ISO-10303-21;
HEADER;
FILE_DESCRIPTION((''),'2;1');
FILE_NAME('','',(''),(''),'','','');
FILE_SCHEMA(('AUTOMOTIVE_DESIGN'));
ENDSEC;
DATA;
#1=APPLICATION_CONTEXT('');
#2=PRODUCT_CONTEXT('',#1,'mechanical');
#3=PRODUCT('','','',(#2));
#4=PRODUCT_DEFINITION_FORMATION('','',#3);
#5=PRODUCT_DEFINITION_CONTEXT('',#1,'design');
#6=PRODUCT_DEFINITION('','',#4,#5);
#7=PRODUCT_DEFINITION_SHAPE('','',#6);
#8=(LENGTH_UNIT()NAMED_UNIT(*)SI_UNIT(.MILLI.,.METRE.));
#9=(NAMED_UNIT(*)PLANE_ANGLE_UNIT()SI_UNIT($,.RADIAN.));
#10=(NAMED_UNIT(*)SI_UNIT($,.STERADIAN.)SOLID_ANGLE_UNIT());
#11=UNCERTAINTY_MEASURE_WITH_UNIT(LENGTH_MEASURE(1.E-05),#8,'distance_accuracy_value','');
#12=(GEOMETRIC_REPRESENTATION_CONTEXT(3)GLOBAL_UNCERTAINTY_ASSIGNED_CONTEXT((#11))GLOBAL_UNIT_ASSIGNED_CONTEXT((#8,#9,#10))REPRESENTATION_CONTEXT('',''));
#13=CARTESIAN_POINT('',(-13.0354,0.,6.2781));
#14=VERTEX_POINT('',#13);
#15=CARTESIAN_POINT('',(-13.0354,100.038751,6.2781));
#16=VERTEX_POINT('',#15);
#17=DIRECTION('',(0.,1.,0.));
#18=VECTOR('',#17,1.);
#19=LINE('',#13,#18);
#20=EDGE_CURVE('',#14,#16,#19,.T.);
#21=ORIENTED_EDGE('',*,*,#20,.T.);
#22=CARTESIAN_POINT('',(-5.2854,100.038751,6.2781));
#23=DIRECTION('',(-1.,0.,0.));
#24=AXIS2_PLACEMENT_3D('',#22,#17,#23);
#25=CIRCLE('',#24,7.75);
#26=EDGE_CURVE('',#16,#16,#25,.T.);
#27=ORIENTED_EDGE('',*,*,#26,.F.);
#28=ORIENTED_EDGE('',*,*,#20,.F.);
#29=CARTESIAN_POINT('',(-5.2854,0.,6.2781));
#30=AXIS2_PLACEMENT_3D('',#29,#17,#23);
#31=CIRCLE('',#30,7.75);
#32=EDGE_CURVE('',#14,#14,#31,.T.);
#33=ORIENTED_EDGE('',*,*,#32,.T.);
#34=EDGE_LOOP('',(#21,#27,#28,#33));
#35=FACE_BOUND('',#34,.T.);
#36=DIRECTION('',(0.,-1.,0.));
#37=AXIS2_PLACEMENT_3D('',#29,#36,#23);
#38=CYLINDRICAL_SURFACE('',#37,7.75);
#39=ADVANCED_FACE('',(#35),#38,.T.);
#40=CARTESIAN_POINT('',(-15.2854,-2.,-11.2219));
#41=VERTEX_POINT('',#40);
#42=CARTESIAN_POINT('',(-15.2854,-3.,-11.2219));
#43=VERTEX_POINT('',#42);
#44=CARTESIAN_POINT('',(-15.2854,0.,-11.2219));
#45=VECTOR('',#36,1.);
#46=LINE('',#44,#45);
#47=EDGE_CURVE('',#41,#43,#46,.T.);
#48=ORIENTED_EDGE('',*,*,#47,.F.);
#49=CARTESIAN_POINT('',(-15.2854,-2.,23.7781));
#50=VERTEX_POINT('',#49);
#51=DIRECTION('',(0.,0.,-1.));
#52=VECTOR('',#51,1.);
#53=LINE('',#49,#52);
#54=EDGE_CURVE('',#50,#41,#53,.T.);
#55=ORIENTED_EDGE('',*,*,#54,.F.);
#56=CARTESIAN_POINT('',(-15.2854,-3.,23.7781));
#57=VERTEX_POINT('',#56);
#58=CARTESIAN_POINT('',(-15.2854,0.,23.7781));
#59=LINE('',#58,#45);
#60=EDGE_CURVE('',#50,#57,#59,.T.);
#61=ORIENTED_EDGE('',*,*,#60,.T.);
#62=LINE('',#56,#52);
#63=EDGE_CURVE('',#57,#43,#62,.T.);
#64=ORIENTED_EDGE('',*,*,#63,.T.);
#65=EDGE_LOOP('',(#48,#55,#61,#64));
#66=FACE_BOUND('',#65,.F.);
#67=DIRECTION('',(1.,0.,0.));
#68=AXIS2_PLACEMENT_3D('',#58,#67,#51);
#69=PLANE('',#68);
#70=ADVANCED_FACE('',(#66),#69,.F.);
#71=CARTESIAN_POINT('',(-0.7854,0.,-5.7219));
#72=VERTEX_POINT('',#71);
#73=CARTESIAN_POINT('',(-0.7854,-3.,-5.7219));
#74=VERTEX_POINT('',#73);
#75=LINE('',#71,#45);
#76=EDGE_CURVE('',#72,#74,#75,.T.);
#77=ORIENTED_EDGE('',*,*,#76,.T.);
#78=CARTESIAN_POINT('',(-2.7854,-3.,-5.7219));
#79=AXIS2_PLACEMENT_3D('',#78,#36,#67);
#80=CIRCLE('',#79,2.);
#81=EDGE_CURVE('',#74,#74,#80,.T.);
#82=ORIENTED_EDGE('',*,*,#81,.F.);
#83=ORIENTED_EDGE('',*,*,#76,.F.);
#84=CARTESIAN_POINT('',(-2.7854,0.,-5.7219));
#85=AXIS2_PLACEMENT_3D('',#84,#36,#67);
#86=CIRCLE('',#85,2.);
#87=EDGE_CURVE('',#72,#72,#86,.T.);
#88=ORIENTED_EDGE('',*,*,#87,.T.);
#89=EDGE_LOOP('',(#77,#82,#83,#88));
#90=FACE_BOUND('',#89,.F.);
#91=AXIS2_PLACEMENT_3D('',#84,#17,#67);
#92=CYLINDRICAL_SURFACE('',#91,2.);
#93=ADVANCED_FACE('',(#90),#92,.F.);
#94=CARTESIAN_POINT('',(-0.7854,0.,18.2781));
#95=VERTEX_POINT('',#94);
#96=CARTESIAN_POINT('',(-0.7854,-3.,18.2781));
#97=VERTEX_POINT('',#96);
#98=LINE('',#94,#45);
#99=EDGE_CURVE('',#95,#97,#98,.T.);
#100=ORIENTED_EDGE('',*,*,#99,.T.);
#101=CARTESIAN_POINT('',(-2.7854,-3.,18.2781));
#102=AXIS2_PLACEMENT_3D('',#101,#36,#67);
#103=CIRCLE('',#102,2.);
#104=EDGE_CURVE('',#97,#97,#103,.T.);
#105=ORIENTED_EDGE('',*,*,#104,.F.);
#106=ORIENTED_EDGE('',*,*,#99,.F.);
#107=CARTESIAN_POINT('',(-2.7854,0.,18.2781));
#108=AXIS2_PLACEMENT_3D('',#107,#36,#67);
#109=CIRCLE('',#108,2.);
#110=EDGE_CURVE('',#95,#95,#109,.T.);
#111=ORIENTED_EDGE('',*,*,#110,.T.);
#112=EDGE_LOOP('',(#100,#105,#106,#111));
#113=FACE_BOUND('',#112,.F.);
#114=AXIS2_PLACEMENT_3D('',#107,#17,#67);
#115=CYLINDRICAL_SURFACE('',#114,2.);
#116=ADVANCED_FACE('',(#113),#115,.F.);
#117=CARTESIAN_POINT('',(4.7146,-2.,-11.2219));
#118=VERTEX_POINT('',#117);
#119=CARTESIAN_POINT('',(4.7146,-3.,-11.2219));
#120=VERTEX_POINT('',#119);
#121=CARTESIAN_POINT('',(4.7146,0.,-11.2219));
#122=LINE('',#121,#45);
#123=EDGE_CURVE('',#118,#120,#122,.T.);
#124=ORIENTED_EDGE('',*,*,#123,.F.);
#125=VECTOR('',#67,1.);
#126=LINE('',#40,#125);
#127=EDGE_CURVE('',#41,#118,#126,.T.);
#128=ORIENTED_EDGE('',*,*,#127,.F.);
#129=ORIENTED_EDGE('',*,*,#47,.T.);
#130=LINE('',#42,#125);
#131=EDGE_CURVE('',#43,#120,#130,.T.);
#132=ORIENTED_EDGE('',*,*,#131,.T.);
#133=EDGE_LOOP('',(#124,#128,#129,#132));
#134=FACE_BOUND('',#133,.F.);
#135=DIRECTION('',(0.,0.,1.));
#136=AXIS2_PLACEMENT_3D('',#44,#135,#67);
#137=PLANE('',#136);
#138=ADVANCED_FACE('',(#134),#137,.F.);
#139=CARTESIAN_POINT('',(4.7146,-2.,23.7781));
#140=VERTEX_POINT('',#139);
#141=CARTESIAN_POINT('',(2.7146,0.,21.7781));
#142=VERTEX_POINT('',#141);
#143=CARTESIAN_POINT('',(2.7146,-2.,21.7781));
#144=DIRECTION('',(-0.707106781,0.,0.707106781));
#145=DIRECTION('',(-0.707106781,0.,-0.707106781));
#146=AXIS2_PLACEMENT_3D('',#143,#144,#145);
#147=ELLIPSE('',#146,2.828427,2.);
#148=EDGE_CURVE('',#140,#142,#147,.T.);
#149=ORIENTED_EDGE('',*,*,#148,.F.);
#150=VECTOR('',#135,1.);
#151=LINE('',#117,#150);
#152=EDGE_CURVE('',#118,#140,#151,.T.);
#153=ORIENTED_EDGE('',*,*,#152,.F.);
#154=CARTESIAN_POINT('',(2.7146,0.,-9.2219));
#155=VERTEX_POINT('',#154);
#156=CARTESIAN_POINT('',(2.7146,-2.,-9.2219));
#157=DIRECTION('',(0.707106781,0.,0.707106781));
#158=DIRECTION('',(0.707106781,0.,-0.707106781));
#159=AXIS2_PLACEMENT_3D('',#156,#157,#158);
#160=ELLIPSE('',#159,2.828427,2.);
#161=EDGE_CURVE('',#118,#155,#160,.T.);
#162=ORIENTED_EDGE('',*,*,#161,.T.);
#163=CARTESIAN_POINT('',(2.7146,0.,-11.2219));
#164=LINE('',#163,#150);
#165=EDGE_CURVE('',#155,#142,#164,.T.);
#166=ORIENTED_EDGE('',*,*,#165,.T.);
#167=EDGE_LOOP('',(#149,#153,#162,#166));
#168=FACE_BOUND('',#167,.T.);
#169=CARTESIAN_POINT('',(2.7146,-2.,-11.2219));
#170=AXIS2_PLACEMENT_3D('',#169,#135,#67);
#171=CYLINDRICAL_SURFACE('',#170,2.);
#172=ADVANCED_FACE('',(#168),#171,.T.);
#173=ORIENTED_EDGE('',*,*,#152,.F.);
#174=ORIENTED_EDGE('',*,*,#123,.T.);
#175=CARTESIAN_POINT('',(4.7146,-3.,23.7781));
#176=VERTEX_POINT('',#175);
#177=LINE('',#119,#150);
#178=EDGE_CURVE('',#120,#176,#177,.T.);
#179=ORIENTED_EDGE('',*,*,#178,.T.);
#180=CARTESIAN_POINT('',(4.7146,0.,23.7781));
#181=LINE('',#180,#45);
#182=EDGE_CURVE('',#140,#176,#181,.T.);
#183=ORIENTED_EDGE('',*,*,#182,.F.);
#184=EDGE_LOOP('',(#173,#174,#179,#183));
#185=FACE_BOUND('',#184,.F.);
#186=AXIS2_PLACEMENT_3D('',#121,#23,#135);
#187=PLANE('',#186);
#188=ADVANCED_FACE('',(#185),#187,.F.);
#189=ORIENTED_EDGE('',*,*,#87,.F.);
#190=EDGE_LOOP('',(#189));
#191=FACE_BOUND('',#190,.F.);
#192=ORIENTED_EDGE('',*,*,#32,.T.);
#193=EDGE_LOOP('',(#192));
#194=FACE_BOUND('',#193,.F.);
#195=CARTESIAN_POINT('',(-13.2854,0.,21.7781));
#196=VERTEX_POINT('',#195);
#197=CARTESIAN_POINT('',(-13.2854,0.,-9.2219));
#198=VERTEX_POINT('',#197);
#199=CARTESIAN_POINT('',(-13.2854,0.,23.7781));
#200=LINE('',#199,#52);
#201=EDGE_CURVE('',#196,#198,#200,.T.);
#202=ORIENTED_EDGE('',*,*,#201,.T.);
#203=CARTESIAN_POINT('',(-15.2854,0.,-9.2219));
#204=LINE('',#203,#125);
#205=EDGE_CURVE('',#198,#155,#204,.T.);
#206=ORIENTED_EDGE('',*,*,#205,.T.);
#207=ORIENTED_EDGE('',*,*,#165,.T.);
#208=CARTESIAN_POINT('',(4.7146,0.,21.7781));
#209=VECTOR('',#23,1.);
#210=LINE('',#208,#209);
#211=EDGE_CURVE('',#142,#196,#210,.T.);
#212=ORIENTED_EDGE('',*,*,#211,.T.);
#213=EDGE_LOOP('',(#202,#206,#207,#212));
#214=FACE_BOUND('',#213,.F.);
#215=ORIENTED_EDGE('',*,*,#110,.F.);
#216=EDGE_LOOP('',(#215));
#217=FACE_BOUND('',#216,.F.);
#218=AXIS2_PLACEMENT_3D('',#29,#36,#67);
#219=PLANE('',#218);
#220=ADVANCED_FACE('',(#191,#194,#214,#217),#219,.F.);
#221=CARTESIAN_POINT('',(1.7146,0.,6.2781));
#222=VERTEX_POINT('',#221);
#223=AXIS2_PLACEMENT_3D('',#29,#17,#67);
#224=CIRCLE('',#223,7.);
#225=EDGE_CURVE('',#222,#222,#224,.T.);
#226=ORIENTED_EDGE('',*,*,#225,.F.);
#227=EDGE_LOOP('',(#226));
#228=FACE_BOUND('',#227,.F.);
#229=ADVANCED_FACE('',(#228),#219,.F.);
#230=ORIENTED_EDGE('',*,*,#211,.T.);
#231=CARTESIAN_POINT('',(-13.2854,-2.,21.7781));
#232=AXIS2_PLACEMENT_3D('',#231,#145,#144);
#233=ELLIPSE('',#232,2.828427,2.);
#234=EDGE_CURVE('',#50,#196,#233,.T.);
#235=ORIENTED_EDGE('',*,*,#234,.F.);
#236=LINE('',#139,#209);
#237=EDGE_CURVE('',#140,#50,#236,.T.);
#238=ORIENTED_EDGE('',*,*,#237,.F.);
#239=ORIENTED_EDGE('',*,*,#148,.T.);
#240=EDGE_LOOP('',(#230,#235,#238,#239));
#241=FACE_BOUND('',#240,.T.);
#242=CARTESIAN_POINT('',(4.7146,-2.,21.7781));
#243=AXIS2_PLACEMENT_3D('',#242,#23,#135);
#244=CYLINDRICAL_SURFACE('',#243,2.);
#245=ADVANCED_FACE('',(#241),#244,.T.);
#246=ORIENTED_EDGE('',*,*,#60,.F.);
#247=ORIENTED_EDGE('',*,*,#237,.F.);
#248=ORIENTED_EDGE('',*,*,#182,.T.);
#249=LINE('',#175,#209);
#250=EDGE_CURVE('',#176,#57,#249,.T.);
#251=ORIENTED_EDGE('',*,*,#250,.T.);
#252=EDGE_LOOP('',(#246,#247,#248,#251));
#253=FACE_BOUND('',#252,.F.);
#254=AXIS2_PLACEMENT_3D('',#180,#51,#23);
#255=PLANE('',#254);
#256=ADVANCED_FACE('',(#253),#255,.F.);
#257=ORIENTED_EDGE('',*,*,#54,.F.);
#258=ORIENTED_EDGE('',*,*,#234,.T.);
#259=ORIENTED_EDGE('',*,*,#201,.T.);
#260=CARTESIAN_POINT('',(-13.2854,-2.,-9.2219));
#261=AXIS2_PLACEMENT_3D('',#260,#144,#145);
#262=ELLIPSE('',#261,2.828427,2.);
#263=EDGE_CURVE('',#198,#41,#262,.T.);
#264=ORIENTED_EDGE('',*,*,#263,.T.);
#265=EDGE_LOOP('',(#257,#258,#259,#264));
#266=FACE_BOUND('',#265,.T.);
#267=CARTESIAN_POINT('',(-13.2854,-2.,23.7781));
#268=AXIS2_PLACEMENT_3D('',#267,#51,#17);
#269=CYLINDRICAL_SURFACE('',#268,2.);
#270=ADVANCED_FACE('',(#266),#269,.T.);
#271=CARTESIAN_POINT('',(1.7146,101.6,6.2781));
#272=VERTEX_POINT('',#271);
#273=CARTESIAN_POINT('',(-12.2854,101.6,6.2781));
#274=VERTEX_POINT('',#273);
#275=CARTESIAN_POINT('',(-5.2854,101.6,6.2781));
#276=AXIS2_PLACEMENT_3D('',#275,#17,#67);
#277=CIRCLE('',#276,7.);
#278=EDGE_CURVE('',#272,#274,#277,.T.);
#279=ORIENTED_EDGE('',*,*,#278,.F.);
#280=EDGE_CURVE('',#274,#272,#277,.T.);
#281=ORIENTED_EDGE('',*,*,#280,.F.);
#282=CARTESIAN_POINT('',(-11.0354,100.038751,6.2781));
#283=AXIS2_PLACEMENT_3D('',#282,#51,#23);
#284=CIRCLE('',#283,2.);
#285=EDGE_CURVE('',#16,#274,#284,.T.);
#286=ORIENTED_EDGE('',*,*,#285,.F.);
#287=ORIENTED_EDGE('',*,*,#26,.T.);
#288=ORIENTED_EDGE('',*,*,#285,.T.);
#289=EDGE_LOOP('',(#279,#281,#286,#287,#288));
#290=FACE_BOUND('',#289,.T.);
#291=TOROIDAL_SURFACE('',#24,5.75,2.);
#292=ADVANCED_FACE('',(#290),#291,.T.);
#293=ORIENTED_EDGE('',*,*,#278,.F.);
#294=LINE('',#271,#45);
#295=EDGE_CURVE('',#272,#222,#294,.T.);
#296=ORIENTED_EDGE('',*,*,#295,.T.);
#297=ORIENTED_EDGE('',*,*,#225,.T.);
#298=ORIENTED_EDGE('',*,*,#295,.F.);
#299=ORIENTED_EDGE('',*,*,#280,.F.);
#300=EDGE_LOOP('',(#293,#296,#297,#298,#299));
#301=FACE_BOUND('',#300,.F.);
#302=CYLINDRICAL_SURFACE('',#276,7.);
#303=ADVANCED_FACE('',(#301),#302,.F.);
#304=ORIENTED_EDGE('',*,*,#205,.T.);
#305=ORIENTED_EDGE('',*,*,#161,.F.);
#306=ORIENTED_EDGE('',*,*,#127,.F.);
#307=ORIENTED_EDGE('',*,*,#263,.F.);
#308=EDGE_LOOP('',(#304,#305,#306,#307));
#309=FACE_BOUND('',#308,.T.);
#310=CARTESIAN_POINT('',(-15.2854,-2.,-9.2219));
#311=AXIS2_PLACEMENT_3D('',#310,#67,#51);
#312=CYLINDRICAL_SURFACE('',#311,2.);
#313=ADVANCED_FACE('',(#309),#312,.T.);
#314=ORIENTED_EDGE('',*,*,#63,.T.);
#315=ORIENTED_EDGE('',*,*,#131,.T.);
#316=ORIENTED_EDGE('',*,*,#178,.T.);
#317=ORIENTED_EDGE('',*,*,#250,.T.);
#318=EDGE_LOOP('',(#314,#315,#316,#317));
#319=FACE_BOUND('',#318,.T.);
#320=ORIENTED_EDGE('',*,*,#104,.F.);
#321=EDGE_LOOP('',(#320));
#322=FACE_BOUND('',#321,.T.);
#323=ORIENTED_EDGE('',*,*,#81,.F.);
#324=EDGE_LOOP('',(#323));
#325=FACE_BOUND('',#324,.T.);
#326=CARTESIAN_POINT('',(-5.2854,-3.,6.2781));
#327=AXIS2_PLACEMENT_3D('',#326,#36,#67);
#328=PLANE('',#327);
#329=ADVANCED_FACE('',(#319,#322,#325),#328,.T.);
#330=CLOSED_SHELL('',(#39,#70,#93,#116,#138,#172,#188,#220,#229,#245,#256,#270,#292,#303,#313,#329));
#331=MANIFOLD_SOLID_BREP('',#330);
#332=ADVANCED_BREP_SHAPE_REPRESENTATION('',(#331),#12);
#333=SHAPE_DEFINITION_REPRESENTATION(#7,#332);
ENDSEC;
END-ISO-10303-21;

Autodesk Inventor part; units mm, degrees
ref_plane "YZ Plane" through (0, 0, 0) normal (1, 0, 0) x (0, 1, 0)
ref_plane "XZ Plane" through (0, 0, 0) normal (0, 1, 0) x (-1, 0, 0)
ref_plane "XY Plane" through (0, 0, 0) normal (0, 0, 1) x (1, 0, 0)
sketch "Sketch1" plane through (0, 0, 0) normal (0, 1, 0) x (-1, 0, 0)
  circle A0 centre (5.2854, 6.2781) radius 7.75
  point P0 (0, 0)
  dimension "d0" = 15.5
extrude "Extrusion1" add sketch "Sketch1" along normal blind 101.6
sketch "Sketch2" plane through (-5.2854, 101.6, 6.2781) normal (0, 1, 0) x (1, 0, 0)
  circle A0 centre (0, 0) radius 7.75 construction
  circle A1 centre (0, 0) radius 7
  point P0 (5.2854, 6.2781)
  dimension "d3" = 14
  dimension "d4" = 0
extrude "Extrusion2" cut sketch "Sketch2" against normal blind 101.6
sketch "Sketch3" plane through (-5.2854, 0, 6.2781) normal (0, -1, 0) x (1, 0, 0)
  circle A0 centre (0, 0) radius 7 construction
  line L0 (10, 17.5) -> (-10, 17.5)
  line L1 (-10, 17.5) -> (-10, -17.5)
  line L2 (-10, -17.5) -> (10, -17.5)
  line L3 (10, -17.5) -> (10, 17.5)
  circle A1 centre (2.5, 12) radius 2
  circle A2 centre (2.5, -12) radius 2
  point P0 (5.2854, -6.2781)
  dimension "d7" = 35
  dimension "d8" = 20
  dimension "d11" = 17.5
  dimension "d12" = 10
  dimension "d14" = 4
  dimension "d15" = 4
  dimension "d16" = 24
  dimension "d17" = 5.5
  dimension "d18" = 7.5
  dimension "d19" = 7.5
extrude "Extrusion3" add sketch "Sketch3" along normal blind 3
fillet "Fillet1" radius 2 4 edges at (-5.2854, 0, 23.7781) (-15.2854, 0, 6.2781) (-5.2854, 0, -11.2219) (4.7146, 0, 6.2781)
fillet "Fillet2" radius 2 1 edges at (2.4646, 101.6, 6.2781)
properties part number "Flag Holder"
